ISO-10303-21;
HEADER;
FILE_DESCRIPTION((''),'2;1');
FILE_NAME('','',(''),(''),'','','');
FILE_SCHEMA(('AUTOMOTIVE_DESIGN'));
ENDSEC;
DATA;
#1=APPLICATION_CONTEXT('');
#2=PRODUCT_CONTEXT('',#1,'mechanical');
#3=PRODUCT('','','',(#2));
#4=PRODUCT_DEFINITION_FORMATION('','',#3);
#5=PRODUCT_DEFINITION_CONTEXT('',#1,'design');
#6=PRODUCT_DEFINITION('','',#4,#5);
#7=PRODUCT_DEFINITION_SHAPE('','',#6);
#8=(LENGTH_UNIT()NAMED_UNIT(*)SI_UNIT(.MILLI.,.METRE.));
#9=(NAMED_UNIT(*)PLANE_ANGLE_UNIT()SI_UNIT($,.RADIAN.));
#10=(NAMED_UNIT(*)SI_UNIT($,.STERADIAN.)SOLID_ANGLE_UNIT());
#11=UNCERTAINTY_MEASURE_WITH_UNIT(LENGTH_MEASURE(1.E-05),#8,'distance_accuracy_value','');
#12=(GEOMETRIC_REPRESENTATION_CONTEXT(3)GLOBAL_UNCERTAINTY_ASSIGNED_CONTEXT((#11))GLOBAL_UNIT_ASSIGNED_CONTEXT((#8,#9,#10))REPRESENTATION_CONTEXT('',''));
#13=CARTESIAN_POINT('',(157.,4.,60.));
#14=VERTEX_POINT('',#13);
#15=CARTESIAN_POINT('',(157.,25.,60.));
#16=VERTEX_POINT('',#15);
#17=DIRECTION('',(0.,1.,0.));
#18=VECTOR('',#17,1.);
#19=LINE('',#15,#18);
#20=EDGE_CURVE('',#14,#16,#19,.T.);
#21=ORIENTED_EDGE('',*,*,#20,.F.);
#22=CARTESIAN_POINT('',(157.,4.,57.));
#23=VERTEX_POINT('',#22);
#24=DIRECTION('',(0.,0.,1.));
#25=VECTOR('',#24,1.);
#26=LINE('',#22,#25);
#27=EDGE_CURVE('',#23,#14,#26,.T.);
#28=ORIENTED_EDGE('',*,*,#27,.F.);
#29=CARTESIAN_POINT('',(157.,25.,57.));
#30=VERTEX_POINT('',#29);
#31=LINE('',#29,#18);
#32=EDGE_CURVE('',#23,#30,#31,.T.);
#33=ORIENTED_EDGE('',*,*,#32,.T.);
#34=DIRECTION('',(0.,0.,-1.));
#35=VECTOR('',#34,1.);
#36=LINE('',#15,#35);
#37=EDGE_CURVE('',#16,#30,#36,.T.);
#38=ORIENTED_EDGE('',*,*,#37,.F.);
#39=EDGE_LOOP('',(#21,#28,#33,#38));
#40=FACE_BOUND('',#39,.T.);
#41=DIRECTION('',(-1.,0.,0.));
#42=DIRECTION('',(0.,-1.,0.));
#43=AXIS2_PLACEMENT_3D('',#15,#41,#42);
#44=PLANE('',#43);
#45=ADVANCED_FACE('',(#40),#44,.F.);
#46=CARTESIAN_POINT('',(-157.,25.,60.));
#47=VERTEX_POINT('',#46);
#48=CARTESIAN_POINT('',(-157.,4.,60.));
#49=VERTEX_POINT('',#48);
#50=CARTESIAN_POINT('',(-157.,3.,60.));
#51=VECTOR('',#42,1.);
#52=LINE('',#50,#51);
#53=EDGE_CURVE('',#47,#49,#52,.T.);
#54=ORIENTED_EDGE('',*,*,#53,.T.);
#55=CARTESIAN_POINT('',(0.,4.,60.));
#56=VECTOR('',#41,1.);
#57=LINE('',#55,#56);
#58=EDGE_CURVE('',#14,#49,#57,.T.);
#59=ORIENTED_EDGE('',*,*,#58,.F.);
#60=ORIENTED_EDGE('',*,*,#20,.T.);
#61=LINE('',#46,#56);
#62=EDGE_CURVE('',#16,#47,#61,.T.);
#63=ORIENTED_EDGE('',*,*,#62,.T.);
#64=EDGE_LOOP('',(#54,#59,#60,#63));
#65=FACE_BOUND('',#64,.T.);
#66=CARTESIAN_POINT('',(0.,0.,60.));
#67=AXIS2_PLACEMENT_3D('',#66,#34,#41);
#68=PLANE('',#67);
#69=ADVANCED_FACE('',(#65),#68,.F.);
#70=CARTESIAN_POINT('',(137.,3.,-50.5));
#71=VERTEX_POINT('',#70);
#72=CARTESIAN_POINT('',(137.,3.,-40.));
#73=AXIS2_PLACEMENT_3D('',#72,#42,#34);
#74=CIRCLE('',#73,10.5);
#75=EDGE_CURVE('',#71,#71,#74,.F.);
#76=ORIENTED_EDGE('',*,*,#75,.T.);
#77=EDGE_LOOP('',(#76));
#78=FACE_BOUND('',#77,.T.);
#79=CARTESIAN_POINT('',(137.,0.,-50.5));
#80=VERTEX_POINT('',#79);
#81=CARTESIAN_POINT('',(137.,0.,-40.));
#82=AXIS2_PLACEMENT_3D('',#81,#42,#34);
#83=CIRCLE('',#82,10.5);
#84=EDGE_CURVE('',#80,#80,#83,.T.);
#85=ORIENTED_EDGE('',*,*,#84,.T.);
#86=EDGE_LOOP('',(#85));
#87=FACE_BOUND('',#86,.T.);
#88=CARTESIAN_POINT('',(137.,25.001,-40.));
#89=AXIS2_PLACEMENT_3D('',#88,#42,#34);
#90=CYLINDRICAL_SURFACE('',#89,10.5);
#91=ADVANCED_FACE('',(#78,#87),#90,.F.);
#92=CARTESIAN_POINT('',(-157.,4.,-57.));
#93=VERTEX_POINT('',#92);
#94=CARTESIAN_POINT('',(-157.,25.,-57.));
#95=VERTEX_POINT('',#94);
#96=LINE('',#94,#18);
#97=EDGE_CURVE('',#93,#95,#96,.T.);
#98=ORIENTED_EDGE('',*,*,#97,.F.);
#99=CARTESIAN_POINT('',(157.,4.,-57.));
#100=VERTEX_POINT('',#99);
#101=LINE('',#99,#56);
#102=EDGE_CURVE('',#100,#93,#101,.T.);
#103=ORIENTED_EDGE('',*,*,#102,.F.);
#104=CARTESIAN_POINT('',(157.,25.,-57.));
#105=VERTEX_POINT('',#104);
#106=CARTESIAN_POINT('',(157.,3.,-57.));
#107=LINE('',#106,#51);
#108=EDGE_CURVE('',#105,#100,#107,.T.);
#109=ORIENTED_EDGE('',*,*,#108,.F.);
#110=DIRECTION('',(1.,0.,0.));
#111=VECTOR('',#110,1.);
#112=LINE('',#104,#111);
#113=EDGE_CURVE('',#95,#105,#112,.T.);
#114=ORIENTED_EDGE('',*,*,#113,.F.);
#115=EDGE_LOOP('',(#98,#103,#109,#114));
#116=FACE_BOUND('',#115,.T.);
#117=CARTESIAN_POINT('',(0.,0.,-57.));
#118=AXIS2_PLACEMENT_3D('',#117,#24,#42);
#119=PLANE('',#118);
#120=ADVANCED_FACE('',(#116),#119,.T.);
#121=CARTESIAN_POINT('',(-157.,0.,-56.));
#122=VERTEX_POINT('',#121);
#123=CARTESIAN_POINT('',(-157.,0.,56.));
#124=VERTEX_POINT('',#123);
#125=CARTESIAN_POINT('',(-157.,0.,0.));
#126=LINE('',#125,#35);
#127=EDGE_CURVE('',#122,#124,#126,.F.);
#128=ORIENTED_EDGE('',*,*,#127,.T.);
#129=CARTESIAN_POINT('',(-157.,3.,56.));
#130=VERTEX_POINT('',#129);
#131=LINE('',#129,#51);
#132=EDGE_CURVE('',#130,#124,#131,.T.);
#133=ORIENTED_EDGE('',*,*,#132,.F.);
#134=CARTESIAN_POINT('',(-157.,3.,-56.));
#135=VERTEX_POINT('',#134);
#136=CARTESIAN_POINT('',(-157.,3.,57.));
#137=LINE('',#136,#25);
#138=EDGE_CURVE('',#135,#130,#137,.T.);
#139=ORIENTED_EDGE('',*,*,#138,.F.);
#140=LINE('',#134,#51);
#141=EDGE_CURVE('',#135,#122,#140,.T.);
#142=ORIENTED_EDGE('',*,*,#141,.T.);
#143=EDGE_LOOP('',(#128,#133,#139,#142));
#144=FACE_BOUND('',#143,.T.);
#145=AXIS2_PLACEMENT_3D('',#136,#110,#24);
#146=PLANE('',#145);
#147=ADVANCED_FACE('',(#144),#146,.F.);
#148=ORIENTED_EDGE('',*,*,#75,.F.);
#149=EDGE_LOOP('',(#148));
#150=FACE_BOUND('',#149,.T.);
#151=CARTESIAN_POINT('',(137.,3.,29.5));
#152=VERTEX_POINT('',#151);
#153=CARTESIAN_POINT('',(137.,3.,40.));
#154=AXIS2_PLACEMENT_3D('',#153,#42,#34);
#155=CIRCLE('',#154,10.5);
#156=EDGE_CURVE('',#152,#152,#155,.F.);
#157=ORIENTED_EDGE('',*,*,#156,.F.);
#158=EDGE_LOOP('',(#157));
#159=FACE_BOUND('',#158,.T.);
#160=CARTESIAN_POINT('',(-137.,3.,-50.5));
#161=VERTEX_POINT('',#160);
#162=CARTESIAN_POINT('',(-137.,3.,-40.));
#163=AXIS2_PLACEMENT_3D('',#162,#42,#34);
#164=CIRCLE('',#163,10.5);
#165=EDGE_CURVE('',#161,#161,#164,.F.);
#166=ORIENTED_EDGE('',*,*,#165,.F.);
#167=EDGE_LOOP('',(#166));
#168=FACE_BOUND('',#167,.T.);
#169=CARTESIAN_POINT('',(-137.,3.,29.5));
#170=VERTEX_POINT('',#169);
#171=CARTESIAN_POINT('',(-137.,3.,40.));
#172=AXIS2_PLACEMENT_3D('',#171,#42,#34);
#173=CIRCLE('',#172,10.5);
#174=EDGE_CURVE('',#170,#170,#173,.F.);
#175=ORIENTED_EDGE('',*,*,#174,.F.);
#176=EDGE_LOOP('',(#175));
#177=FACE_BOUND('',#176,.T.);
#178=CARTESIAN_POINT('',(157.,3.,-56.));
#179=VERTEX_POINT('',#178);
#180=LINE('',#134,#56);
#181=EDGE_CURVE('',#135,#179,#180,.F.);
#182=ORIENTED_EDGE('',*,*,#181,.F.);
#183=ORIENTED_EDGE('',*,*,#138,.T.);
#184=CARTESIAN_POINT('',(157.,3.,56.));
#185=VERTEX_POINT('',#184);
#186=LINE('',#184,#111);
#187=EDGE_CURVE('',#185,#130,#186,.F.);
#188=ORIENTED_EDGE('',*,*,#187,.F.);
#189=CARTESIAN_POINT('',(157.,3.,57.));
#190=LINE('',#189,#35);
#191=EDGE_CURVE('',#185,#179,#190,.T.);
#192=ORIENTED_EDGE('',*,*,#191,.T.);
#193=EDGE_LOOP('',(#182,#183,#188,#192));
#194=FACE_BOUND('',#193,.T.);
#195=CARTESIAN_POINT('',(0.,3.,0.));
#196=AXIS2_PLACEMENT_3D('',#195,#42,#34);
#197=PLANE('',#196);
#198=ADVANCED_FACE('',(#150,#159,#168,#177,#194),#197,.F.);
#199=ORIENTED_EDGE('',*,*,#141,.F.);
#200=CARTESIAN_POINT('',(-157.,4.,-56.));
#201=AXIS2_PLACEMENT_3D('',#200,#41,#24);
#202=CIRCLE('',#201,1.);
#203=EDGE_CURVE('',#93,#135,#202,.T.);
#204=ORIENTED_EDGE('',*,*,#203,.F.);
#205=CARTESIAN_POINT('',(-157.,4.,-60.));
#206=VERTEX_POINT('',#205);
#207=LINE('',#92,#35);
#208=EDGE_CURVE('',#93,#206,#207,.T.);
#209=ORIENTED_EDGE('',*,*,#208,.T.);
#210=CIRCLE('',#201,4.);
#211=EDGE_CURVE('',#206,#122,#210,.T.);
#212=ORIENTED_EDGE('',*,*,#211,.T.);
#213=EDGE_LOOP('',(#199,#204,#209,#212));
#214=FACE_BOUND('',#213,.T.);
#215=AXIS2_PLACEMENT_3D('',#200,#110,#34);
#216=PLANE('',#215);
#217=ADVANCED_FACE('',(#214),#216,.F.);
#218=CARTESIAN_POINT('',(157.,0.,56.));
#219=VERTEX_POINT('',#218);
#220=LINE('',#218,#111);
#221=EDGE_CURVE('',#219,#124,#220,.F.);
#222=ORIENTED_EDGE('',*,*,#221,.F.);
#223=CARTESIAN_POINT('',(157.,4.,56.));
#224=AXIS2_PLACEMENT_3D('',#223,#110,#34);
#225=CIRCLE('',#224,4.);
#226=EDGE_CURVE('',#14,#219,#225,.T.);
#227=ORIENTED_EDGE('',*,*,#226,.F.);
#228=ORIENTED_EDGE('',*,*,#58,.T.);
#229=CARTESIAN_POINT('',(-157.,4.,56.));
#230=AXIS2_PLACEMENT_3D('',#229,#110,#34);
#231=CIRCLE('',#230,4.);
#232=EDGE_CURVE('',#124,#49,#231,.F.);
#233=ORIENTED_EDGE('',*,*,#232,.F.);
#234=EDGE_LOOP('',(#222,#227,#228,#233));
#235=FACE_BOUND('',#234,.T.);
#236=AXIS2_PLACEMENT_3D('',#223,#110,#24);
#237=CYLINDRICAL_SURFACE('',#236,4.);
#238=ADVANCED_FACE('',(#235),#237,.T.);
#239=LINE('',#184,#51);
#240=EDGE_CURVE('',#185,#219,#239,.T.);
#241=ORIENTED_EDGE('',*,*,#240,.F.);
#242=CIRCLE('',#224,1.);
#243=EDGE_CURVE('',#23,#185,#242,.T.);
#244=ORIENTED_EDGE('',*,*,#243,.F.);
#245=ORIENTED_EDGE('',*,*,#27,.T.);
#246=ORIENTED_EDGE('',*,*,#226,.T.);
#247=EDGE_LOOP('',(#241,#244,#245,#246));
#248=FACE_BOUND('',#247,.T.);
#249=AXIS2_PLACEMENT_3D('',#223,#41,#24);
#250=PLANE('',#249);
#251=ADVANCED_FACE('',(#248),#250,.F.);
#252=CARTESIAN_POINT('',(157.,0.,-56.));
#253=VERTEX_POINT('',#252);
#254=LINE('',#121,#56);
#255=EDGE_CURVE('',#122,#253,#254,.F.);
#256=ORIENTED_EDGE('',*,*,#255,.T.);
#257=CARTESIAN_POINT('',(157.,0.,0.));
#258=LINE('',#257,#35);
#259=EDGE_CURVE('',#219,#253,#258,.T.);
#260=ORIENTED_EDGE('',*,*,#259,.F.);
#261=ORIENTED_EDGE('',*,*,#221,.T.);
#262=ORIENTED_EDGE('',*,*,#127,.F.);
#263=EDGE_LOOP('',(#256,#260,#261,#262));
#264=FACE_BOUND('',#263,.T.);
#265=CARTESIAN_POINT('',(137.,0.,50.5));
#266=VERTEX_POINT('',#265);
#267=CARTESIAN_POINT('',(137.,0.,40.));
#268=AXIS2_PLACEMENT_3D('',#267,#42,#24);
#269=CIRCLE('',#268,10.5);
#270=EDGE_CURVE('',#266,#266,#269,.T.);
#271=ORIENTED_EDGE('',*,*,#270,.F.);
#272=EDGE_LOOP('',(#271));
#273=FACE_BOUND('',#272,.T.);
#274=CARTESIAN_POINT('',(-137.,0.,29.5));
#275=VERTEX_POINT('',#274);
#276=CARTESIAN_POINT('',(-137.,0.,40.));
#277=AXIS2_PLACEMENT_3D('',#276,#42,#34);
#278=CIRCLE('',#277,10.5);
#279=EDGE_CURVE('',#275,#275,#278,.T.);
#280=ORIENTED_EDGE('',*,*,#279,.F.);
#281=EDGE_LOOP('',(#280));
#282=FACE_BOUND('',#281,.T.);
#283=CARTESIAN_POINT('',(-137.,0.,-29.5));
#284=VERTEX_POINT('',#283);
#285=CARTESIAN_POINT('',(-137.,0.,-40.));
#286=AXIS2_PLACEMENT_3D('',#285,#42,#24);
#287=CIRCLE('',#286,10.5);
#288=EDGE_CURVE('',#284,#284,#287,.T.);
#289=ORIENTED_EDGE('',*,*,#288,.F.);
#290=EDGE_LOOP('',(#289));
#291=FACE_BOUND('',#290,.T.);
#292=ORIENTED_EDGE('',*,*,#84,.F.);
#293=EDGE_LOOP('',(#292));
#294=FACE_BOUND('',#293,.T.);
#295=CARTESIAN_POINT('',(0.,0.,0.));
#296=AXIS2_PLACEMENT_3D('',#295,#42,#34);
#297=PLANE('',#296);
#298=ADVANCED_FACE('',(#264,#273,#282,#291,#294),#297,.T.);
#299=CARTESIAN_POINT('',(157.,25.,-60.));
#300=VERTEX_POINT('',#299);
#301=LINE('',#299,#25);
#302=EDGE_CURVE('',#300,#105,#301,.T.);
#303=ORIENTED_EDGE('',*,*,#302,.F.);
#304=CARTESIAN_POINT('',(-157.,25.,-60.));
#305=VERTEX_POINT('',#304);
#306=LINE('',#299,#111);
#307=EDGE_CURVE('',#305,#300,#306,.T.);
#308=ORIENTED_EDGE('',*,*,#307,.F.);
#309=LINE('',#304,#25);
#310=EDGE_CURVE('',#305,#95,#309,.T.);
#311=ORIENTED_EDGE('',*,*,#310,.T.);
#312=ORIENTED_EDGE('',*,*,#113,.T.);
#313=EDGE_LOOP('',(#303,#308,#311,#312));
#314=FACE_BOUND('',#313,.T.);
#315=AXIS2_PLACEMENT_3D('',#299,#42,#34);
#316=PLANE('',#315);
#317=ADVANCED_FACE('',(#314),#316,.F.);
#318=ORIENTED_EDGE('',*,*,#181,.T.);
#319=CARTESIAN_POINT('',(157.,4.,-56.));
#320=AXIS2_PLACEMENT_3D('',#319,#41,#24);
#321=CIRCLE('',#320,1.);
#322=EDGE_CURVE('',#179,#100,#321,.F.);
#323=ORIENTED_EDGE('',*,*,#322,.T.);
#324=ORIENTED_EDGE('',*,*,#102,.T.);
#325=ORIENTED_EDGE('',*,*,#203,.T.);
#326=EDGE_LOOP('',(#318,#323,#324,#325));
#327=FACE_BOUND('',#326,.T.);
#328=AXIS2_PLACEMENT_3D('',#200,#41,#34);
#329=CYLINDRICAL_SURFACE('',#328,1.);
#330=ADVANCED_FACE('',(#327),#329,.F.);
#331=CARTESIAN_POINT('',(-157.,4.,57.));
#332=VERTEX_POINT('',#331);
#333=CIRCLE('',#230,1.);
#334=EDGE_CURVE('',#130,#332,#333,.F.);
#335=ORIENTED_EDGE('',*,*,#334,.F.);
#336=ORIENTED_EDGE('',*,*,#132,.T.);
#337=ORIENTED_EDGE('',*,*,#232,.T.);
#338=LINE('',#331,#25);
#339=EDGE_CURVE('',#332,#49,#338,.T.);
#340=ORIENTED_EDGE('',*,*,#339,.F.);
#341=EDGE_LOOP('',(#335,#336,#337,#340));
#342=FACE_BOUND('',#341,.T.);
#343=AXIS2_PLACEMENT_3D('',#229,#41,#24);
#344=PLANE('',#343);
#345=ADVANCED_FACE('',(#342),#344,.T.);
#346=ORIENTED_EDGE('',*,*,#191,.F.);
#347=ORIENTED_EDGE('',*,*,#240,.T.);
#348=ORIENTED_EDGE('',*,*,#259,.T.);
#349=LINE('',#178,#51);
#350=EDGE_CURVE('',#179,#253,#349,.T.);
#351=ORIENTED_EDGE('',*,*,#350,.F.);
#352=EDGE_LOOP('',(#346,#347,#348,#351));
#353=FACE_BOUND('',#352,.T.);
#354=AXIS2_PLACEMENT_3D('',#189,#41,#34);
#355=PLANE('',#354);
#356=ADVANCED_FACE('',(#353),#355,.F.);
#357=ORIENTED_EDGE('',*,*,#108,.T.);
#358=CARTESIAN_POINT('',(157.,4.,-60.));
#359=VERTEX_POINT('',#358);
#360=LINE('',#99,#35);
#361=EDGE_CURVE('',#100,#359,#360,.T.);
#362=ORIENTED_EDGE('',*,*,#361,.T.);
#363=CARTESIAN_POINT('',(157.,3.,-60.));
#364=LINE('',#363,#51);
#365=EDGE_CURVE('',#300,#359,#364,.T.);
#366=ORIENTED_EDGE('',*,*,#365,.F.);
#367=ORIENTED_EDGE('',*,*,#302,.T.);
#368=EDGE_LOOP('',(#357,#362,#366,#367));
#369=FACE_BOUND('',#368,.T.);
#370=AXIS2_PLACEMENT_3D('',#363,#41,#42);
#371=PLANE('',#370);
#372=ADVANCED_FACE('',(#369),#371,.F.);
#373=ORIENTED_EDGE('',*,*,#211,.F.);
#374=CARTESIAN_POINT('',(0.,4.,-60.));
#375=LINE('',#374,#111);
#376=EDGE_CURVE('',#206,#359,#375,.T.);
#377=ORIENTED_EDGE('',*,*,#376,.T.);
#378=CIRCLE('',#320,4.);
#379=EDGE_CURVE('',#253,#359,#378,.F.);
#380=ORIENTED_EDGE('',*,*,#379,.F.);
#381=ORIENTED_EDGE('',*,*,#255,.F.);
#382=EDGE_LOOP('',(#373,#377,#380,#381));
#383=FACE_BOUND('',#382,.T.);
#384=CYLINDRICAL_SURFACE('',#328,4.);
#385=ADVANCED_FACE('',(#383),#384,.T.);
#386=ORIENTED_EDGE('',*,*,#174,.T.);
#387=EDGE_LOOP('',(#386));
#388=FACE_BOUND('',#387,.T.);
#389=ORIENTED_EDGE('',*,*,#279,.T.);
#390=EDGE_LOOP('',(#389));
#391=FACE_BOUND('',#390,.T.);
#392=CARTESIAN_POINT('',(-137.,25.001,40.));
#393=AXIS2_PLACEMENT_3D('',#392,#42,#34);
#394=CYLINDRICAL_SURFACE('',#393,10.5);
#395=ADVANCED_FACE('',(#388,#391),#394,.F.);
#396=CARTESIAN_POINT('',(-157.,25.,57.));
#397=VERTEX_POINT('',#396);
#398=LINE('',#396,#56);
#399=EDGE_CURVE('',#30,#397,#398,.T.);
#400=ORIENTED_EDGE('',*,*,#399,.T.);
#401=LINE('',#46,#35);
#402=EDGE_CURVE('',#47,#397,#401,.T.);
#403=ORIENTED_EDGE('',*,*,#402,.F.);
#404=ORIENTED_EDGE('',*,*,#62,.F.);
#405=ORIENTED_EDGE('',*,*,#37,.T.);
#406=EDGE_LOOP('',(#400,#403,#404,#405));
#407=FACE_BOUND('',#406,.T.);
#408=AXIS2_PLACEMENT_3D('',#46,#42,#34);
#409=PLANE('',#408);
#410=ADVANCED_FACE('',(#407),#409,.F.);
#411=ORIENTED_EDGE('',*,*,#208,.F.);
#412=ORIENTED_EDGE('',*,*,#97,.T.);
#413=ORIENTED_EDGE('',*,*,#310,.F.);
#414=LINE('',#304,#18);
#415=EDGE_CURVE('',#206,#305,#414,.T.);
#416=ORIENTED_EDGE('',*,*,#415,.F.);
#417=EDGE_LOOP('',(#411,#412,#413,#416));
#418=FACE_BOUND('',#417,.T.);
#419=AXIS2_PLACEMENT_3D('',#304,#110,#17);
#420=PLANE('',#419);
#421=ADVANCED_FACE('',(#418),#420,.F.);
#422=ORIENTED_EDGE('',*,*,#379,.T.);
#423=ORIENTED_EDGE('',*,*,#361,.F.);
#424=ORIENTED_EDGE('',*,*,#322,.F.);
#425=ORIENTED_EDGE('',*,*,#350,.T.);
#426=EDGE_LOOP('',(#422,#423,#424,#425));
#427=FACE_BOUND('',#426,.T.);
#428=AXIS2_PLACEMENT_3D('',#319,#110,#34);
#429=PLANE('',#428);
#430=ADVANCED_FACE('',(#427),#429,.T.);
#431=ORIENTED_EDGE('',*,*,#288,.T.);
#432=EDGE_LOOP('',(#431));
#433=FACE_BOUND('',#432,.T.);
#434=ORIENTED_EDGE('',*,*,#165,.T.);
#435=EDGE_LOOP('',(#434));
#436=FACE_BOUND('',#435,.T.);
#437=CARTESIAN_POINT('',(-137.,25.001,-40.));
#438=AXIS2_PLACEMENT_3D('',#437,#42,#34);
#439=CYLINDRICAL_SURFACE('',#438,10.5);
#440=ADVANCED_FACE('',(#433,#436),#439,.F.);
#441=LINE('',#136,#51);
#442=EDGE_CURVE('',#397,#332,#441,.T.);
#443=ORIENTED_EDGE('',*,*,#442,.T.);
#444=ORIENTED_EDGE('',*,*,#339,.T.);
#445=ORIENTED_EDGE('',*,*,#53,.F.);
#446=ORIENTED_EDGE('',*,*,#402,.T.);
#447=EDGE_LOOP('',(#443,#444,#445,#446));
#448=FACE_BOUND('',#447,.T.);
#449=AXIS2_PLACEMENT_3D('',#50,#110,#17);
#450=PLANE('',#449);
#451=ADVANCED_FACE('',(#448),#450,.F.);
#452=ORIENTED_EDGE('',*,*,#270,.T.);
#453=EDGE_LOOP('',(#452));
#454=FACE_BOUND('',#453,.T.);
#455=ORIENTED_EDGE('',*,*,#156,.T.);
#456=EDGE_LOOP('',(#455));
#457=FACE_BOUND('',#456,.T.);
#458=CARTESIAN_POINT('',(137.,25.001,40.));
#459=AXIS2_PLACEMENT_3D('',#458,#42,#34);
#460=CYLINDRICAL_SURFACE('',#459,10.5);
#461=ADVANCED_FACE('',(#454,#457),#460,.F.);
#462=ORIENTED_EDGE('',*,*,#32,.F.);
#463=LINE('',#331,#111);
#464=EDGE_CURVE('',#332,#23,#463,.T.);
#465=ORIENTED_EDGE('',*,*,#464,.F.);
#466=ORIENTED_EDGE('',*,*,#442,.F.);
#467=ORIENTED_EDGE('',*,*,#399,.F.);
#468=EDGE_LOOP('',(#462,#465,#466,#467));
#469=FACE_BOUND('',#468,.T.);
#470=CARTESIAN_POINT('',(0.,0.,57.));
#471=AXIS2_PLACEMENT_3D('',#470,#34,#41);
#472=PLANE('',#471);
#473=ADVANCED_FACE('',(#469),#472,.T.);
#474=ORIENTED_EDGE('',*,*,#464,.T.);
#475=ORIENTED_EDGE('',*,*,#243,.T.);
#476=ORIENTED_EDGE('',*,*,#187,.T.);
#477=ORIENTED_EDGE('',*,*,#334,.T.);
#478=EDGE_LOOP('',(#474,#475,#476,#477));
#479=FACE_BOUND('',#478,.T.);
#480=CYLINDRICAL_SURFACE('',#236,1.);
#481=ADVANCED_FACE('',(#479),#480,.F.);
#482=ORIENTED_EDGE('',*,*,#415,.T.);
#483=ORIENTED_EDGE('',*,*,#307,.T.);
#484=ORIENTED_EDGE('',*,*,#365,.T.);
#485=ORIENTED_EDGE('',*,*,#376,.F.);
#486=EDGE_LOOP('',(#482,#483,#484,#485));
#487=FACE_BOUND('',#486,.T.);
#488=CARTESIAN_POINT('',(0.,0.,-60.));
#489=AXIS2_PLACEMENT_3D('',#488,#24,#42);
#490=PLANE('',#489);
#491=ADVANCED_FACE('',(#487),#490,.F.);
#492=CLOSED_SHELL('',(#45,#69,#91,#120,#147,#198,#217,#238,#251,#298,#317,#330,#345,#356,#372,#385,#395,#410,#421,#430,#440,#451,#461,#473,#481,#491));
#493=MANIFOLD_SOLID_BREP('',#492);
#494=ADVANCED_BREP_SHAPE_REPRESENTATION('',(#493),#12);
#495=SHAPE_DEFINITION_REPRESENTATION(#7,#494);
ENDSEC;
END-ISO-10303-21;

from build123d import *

# Parameters (mm, degrees)
SKETCH1_W                      = 314
SKETCH1_H                      = 114
BOSS_EXTRUDE1_DEPTH            = 3
EDGE_FLANGE1_STRIP_W           = 14
EDGE_FLANGE1_STRIP_H           = 3
EDGE_FLANGE1_STRIP_CUT_DEPTH   = 314
EDGE_FLANGE1_STRIP_2_W         = 14
EDGE_FLANGE1_STRIP_2_H         = 3
EDGE_FLANGE1_STRIP_CUT_2_DEPTH = 314
EDGE_FLANGE1_DEPTH             = 314
EDGE_FLANGE1_BEND_DEPTH        = 314
CUT_EXTRUDE1_REACH             = 171.924
SKETCH16_R                     = 10.5


# Sheet-metal steps are written as plain solids
with BuildPart() as part:
    # Sketch1 → Boss-Extrude1 (new body)
    with BuildSketch(Plane(origin=(0, 0, 0), x_dir=(1, 0, 0), z_dir=(0, 1, 0))):
        Rectangle(SKETCH1_W, SKETCH1_H)
    extrude(amount=BOSS_EXTRUDE1_DEPTH)

    # Edge-Flange1 strip (across the edge) → Edge-Flange1 strip cut (cut)
    with BuildSketch(Plane(origin=(-157, 3, 57), x_dir=(0, 0, -1), z_dir=(1, 0, 0))):
        with Locations((-6, -1.5)):
            Rectangle(EDGE_FLANGE1_STRIP_W, EDGE_FLANGE1_STRIP_H)
    extrude(amount=EDGE_FLANGE1_STRIP_CUT_DEPTH, mode=Mode.SUBTRACT)

    # Edge-Flange1 strip 2 (across the edge) → Edge-Flange1 strip cut 2 (cut)
    with BuildSketch(Plane(origin=(157, 3, -57), x_dir=(0, 0, 1), z_dir=(-1, 0, 0))):
        with Locations((-6, -1.5)):
            Rectangle(EDGE_FLANGE1_STRIP_2_W, EDGE_FLANGE1_STRIP_2_H)
    extrude(amount=EDGE_FLANGE1_STRIP_CUT_2_DEPTH, mode=Mode.SUBTRACT)

    # Edge-Flange1 section (across the edge) → Edge-Flange1 (add)
    with BuildSketch(Plane(origin=(-157, 3, 57), x_dir=(0, 0, -1), z_dir=(1, 0, 0))):
        with BuildLine():
            Line((-3, 1), (-3, 22))
            Line((-3, 22), (0, 22))
            Line((0, 22), (0, 1))
            ThreePointArc((0, 1), (0.292893219, 0.292893219), (1, 0))
            Line((1, 0), (1, -3))
            ThreePointArc((1, -3), (-1.828427125, -1.828427125), (-3, 1))
        make_face()
    extrude(amount=EDGE_FLANGE1_DEPTH)

    # Edge-Flange1 section 2 (across the edge) → Edge-Flange1 bend (add)
    with BuildSketch(Plane(origin=(157, 3, -57), x_dir=(0, 0, 1), z_dir=(-1, 0, 0))):
        with BuildLine():
            Line((-3, 1), (-3, 22))
            Line((-3, 22), (0, 22))
            Line((0, 22), (0, 1))
            ThreePointArc((0, 1), (0.292893219, 0.292893219), (1, 0))
            Line((1, 0), (1, -3))
            ThreePointArc((1, -3), (-1.828427125, -1.828427125), (-3, 1))
        make_face()
    extrude(amount=EDGE_FLANGE1_BEND_DEPTH)

    # Sketch16 → Cut-Extrude1 (cut, up to next)
    with BuildSketch(Plane.XZ, mode=Mode.PRIVATE) as cut_extrude1_sk1:
        with Locations(Location((-137, 40, 0), (0, 0, 270))):
            Circle(SKETCH16_R)
    cut_extrude1_tool1 = extrude(cut_extrude1_sk1.sketch, amount=-CUT_EXTRUDE1_REACH, mode=Mode.PRIVATE) & part.part
    # Sketch16 → Cut-Extrude1 (cut, up to next)
    with BuildSketch(Plane.XZ, mode=Mode.PRIVATE) as cut_extrude1_sk2:
        with Locations(Location((-137, -40, 0), (0, 0, 270))):
            Circle(SKETCH16_R)
    cut_extrude1_tool2 = extrude(cut_extrude1_sk2.sketch, amount=-CUT_EXTRUDE1_REACH, mode=Mode.PRIVATE) & part.part
    # Sketch16 → Cut-Extrude1 (cut, up to next)
    with BuildSketch(Plane.XZ, mode=Mode.PRIVATE) as cut_extrude1_sk3:
        with Locations(Location((137, -40, 0), (0, 0, 270))):
            Circle(SKETCH16_R)
    cut_extrude1_tool3 = extrude(cut_extrude1_sk3.sketch, amount=-CUT_EXTRUDE1_REACH, mode=Mode.PRIVATE) & part.part
    # Sketch16 → Cut-Extrude1 (cut, up to next)
    with BuildSketch(Plane.XZ, mode=Mode.PRIVATE) as cut_extrude1_sk4:
        with Locations(Location((137, 40, 0), (0, 0, 270))):
            Circle(SKETCH16_R)
    cut_extrude1_tool4 = extrude(cut_extrude1_sk4.sketch, amount=-CUT_EXTRUDE1_REACH, mode=Mode.PRIVATE) & part.part
    add(cut_extrude1_tool1.solids().sort_by_distance((-137, 0, 40))[0], mode=Mode.SUBTRACT)
    add(cut_extrude1_tool2.solids().sort_by_distance((-137, 0, -40))[0], mode=Mode.SUBTRACT)
    add(cut_extrude1_tool3.solids().sort_by_distance((137, 0, -40))[0], mode=Mode.SUBTRACT)
    add(cut_extrude1_tool4.solids().sort_by_distance((137, 0, 40))[0], mode=Mode.SUBTRACT)


solid = part.part
